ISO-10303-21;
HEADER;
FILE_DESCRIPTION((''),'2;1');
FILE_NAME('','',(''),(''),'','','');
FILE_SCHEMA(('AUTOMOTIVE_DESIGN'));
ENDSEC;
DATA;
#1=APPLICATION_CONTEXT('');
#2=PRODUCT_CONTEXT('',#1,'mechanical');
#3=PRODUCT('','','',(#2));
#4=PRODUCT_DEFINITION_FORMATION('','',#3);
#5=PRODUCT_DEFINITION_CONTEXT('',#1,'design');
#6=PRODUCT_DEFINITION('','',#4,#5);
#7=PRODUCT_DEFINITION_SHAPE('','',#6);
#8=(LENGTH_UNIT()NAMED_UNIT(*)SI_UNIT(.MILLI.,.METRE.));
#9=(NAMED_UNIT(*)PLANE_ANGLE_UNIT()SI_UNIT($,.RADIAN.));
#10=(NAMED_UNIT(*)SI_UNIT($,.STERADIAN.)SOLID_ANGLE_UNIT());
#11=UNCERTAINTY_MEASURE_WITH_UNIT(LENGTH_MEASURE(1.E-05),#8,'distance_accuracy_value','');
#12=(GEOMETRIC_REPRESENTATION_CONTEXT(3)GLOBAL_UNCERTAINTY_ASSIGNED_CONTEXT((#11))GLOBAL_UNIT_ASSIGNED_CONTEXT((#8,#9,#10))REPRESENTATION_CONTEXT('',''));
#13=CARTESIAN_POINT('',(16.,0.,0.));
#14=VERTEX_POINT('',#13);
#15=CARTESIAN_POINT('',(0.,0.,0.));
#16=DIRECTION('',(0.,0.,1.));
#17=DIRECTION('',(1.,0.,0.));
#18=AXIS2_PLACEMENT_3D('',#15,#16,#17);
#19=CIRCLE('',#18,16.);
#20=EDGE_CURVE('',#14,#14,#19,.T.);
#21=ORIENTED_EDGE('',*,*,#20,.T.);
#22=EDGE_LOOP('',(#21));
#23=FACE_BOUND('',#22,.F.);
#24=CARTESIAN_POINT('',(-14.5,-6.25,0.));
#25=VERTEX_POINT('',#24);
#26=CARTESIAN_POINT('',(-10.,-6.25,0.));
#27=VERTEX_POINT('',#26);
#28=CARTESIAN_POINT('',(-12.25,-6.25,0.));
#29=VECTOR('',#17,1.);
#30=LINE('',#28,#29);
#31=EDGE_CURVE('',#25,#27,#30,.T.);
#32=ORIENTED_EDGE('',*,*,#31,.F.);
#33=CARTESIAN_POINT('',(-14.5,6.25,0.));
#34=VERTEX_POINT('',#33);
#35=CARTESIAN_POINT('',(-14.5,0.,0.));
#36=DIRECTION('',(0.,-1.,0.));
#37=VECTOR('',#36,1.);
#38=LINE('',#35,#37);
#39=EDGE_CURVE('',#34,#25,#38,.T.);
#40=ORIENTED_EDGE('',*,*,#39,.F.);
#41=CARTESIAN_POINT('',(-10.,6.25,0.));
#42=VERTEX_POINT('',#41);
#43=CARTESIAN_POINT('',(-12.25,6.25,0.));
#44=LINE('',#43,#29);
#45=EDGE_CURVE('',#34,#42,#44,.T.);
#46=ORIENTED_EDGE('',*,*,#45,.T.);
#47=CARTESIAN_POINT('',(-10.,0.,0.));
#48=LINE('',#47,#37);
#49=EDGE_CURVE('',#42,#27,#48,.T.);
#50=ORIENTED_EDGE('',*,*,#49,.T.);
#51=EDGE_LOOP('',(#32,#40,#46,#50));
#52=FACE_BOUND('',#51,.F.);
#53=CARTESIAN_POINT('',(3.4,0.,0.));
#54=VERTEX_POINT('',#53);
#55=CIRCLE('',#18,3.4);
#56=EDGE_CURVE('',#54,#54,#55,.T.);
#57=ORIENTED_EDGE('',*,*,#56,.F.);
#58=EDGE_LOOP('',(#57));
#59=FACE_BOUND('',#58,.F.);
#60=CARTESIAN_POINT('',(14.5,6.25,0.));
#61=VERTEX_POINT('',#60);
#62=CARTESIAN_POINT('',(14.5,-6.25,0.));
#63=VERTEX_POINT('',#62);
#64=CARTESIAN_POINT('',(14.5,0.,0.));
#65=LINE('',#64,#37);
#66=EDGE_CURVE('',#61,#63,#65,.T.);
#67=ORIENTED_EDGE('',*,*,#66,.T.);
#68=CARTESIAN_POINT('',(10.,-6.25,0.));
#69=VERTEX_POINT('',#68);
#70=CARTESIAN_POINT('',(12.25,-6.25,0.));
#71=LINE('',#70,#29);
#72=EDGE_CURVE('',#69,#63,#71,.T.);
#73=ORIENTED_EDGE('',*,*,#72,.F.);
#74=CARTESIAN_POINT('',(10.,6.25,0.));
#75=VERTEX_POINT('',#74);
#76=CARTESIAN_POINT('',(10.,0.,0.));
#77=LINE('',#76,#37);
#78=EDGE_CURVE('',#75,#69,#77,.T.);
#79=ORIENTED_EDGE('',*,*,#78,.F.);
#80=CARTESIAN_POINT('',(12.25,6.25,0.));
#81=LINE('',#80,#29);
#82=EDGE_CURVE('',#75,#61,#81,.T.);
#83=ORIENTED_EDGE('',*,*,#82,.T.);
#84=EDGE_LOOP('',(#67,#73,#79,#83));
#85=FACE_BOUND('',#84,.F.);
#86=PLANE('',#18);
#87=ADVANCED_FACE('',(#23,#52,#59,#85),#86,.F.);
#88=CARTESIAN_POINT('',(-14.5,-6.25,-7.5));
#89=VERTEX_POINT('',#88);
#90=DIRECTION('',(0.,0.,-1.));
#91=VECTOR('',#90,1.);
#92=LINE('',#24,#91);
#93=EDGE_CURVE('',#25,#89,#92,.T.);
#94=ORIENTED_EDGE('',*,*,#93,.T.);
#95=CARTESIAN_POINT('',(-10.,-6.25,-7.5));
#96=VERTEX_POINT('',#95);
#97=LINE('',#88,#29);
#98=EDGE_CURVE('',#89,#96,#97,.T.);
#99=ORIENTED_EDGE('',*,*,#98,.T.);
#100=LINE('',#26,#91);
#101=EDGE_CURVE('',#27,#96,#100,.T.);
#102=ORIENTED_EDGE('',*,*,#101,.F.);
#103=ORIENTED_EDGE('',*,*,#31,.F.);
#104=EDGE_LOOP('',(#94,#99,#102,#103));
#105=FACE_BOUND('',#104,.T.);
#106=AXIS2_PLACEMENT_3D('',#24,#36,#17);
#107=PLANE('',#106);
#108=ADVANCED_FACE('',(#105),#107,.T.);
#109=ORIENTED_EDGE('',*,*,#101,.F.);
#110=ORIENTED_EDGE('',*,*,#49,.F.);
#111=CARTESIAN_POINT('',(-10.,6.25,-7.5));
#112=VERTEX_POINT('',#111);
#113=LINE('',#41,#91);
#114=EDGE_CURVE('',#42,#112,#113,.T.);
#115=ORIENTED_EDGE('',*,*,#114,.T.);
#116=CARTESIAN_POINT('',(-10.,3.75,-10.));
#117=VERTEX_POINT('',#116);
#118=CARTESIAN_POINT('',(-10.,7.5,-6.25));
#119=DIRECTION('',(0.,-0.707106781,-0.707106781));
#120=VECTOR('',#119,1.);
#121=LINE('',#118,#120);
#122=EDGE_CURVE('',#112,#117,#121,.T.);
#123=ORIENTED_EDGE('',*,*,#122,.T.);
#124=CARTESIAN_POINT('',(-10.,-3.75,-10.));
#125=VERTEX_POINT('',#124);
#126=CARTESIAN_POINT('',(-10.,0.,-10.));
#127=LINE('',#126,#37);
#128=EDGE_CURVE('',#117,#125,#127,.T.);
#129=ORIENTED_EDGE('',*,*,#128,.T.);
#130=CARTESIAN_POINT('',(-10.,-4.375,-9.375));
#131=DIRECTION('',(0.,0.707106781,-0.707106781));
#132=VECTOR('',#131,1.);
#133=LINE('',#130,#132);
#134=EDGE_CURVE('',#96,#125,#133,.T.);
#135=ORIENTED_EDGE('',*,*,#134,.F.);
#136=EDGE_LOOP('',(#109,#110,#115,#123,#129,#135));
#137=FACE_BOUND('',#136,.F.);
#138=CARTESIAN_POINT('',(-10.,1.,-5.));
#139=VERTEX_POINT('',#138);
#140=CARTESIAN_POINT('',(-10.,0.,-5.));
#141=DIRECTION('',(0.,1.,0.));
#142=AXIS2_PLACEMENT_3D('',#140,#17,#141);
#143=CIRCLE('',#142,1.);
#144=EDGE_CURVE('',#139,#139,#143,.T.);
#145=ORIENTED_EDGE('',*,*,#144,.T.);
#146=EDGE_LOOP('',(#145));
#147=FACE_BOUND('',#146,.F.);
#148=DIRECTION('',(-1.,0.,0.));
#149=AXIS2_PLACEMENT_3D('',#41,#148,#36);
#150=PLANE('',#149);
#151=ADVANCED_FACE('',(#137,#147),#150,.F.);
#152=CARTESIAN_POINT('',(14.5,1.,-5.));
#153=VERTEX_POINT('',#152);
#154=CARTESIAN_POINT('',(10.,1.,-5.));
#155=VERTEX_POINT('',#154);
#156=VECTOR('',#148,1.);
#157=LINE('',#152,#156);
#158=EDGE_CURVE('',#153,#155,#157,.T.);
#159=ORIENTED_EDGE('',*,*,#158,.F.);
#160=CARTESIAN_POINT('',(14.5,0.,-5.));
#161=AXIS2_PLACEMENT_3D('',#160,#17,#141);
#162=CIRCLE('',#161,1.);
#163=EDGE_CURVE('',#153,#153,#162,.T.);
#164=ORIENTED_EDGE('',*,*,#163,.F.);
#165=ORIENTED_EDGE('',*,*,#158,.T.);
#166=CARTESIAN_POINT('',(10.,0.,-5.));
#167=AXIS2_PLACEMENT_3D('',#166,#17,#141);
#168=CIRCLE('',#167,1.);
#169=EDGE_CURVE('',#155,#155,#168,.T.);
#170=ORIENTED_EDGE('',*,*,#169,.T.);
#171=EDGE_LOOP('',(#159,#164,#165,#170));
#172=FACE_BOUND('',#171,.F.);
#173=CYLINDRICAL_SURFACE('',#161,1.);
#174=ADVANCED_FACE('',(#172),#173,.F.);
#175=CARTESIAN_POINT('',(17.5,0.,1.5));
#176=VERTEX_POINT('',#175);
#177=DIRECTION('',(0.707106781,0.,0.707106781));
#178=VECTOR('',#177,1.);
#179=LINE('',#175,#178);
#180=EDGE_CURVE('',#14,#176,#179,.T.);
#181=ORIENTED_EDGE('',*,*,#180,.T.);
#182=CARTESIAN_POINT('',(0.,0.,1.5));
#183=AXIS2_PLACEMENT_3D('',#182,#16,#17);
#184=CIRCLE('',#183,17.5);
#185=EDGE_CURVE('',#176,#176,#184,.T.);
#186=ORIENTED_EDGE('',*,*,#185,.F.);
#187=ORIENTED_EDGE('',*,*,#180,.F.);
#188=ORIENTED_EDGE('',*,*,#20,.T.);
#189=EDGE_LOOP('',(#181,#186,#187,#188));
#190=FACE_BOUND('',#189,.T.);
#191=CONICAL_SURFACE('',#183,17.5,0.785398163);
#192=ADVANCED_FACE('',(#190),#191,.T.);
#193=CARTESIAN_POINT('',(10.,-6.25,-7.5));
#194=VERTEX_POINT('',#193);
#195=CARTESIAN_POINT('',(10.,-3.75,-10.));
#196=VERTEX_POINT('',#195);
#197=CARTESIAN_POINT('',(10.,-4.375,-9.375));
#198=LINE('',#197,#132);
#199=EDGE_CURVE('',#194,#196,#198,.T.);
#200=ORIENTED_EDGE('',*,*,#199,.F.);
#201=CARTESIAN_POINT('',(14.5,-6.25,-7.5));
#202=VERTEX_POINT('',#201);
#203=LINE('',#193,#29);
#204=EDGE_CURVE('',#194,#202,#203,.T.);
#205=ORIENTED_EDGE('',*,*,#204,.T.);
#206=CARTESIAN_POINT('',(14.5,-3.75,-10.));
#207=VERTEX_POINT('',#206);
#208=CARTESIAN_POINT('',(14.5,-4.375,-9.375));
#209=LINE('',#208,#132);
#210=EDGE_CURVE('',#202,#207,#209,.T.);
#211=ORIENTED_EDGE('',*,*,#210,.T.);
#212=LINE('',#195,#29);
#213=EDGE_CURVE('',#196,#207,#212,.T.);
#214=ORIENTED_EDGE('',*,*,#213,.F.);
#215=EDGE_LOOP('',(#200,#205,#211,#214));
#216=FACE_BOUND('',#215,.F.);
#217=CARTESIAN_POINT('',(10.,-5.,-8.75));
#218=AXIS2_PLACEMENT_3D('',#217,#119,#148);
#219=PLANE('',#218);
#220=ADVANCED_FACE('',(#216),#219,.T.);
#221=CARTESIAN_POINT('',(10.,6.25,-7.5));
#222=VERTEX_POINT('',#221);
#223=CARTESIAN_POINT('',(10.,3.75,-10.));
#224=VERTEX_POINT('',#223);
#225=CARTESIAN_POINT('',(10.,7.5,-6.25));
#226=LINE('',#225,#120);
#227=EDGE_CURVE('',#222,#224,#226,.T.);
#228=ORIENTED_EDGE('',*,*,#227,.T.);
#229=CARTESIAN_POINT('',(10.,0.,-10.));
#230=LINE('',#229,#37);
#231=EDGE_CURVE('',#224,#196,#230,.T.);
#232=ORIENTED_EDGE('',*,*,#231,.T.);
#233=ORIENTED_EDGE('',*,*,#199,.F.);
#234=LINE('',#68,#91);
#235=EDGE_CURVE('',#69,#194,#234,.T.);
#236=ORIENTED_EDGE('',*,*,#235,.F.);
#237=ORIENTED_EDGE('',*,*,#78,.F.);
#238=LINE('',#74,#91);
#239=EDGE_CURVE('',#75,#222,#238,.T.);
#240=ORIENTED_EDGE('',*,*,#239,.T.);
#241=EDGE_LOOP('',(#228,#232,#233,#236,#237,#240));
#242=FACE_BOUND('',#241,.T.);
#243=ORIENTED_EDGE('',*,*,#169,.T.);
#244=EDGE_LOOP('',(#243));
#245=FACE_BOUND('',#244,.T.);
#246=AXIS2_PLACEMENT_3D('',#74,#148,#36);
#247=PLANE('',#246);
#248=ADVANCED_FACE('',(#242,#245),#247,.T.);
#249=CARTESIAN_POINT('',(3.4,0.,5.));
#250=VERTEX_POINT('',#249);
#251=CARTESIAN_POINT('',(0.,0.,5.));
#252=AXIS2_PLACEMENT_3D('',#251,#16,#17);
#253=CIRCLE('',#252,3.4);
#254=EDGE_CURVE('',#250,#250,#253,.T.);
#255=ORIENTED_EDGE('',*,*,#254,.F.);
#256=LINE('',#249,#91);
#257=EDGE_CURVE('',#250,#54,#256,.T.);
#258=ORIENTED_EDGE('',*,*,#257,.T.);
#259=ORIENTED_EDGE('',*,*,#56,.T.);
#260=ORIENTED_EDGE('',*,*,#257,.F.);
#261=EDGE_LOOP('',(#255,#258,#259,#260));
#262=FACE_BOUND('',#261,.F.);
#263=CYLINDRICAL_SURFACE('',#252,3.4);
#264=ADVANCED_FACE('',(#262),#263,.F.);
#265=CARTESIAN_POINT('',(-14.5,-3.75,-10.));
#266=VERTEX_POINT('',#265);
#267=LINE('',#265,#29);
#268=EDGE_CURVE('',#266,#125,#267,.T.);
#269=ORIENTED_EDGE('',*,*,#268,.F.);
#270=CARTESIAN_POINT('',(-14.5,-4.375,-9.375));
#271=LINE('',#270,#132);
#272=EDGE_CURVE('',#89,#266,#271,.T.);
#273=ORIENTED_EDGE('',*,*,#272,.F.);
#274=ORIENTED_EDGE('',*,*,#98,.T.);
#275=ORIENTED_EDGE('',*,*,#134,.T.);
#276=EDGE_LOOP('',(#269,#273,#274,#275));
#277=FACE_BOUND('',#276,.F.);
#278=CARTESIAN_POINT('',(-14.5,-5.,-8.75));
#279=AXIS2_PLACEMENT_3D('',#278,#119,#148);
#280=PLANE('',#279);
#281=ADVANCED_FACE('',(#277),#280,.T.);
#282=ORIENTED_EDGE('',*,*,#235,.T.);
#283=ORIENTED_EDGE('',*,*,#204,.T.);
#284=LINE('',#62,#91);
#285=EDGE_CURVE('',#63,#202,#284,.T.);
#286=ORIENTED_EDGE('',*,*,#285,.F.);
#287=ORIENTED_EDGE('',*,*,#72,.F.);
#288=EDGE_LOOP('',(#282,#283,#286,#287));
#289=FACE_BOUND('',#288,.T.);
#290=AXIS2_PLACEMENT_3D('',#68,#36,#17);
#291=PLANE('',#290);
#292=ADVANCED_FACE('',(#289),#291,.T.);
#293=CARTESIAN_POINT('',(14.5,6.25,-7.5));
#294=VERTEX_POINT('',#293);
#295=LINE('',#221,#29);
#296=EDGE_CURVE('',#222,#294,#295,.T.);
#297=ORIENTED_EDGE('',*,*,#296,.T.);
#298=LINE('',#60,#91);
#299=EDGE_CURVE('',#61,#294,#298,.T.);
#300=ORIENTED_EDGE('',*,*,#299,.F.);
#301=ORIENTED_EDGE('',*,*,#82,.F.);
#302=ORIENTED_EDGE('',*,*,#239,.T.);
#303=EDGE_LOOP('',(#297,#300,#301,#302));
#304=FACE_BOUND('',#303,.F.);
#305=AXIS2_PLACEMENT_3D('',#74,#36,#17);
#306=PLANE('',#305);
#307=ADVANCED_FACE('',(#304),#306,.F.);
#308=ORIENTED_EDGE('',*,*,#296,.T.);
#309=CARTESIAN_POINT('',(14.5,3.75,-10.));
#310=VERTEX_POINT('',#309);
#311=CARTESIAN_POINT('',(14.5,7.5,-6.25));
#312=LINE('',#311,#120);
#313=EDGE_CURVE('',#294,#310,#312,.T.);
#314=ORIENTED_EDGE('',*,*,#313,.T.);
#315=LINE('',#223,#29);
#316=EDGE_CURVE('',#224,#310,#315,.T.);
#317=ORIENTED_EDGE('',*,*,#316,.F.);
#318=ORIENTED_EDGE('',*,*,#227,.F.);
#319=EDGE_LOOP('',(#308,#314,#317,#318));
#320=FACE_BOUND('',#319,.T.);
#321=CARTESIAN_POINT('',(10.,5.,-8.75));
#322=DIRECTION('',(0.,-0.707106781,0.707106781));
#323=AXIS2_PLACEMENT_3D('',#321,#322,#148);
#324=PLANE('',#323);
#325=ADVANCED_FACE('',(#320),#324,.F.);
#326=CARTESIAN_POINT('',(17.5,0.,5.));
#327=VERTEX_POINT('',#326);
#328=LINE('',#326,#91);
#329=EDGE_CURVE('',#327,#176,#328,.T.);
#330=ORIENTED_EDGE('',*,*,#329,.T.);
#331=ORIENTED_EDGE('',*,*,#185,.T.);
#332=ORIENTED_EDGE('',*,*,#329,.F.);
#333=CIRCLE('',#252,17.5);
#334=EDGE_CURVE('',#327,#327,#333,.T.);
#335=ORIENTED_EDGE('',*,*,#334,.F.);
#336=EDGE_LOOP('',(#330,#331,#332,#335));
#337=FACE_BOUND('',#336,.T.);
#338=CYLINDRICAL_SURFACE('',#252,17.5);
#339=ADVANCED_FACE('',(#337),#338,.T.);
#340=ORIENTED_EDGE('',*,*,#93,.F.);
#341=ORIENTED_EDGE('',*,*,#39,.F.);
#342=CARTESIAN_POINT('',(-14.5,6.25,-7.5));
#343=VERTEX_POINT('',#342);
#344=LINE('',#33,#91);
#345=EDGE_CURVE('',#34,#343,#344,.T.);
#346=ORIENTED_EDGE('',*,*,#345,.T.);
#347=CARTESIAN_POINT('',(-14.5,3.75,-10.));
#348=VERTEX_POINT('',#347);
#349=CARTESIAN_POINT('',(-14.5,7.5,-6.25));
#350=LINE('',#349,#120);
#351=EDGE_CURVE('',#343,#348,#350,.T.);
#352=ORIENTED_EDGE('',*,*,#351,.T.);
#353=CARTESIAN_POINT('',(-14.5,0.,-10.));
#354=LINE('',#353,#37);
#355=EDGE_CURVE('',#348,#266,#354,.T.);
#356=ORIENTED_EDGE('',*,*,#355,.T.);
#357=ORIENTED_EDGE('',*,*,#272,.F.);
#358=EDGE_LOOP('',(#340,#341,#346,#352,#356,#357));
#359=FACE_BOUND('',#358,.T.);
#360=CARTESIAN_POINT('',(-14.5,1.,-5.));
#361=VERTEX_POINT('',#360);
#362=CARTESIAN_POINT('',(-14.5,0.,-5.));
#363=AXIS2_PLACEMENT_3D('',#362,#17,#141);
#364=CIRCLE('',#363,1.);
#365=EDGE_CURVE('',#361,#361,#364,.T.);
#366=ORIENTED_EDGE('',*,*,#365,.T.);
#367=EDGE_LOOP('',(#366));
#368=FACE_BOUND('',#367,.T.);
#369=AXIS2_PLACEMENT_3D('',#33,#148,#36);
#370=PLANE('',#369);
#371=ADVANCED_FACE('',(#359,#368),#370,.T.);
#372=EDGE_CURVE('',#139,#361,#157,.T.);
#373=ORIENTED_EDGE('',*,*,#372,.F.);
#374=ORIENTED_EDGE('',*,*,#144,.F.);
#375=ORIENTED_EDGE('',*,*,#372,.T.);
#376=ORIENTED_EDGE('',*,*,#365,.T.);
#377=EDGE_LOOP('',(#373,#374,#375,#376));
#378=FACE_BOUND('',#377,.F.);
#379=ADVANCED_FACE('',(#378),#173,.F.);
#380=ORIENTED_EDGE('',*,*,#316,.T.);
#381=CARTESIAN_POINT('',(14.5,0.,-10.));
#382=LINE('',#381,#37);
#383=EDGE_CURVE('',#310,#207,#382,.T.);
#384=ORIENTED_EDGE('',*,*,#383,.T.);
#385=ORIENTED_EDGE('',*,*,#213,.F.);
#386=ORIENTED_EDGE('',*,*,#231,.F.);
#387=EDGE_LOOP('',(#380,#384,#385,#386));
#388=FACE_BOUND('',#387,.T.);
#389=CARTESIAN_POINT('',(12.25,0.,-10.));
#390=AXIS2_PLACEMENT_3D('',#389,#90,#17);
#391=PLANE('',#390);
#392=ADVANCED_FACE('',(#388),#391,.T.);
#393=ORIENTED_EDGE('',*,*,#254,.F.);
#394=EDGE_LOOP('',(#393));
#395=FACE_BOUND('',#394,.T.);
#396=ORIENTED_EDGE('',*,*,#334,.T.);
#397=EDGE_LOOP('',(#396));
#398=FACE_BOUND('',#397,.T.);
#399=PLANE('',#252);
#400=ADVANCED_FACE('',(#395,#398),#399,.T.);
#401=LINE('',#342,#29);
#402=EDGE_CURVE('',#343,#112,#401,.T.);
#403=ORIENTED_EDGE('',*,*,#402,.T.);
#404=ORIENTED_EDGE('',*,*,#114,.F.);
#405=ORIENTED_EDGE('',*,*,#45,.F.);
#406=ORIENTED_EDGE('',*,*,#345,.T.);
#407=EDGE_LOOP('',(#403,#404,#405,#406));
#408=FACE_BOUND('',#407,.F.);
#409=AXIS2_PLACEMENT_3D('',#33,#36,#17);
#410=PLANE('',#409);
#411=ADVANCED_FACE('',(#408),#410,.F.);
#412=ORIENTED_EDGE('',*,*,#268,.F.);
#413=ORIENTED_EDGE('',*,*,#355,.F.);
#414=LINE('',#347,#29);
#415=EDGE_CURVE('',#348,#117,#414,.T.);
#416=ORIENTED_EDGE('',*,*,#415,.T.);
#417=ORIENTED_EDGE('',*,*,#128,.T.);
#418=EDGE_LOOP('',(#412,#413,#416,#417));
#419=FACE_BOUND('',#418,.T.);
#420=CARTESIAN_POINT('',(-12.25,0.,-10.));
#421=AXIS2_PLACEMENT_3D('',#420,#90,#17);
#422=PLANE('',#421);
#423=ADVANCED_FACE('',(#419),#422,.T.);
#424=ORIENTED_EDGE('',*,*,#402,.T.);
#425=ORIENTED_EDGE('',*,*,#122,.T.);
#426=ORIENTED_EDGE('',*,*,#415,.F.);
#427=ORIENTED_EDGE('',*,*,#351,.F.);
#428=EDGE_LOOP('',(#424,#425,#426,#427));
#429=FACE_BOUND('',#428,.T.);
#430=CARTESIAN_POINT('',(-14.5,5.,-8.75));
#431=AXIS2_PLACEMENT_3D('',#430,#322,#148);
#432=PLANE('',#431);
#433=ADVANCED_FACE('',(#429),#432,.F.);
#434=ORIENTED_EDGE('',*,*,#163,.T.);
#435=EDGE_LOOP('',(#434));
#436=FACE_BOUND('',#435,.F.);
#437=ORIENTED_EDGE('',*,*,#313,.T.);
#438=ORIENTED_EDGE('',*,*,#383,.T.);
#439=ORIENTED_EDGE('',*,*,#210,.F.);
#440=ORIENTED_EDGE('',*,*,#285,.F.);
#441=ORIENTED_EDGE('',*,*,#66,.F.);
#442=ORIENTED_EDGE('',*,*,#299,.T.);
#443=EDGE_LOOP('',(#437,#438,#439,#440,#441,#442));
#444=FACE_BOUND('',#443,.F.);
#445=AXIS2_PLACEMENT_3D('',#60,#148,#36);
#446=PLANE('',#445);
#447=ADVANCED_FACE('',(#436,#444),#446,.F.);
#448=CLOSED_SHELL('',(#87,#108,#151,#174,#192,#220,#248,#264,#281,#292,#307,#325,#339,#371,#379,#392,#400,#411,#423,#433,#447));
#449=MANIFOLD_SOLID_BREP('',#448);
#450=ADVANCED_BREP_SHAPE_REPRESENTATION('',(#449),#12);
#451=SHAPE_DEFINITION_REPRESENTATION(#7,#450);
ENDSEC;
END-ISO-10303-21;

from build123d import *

# Parameters (mm, degrees)
F1_DEPTH  = 5
F3_SIZE   = 1
F2_W      = 4.5
F2_H      = 12.5
F4_DEPTH  = 10
F5_SIZE   = 2.5
F6_R      = 1
F7_DEPTH  = 39.5010001
F8_R      = 39.5864097355
F8_R_2    = 17.5
F9_DEPTH  = 25
F10_SIZE  = 1.5
F11_R     = 3.4
F12_DEPTH = 25


with BuildPart() as f1:
    # F0 (on Top) → F1 (new body)
    with BuildSketch(Plane.XY):
        with BuildLine():
            ThreePointArc((19.8625961196, -15.8301909188), (23.6080012184, -12.5093598908), (25, -7.7012087429))
            Line((25, -7.7012087429), (25, 7.7012087429))
            ThreePointArc((25, 7.7012087429), (23.6080012184, 12.5093598908), (19.8625961196, 15.8301909188))
            add(Edge.make_bspline(
                [(19.8625961196, 15.8301909188), (0, 25.2681728257), (-19.8625961196, 15.8301909188)],
                knots=[0.9132750433, 0.9132750433, 0.9132750433, 2.2283176103, 2.2283176103, 2.2283176103], degree=2, weights=[1, 0.7915095459, 1]))
            ThreePointArc((-19.8625961196, 15.8301909188), (-23.6080012184, 12.5093598908), (-25, 7.7012087429))
            Line((-25, 7.7012087429), (-25, -7.7012087429))
            ThreePointArc((-25, -7.7012087429), (-23.6080012184, -12.5093598908), (-19.8625961196, -15.8301909188))
            add(Edge.make_bspline(
                [(-19.8625961196, -15.8301909188), (0, -25.2681728257), (19.8625961196, -15.8301909188)],
                knots=[4.0548676969, 4.0548676969, 4.0548676969, 5.3699102639, 5.3699102639, 5.3699102639], degree=2, weights=[1, 0.7915095459, 1]))
        make_face()
    extrude(amount=F1_DEPTH)

    # F3
    f3_edges = [f1.edges().sort_by_distance(p)[0] for p in [
        (4e-06, -20, 0),
    ]]
    chamfer(f3_edges, length=F3_SIZE)

    # F2 (on face) → F4 (join)
    with BuildSketch(Plane(origin=(0, 0, 0), x_dir=(1, 0, 0), z_dir=(0, 0, -1))):
        with Locations((12.25, 0)):
            Rectangle(F2_W, F2_H)
        with Locations((-12.25, 0)):
            Rectangle(F2_W, F2_H)
    extrude(amount=F4_DEPTH)

    # F5
    f5_edges = [f1.edges().sort_by_distance(p)[0] for p in [
        (-12.25, -6.25, -10),
        (12.25, -6.25, -10),
        (-12.25, 6.25, -10),
        (12.25, 6.25, -10),
    ]]
    chamfer(f5_edges, length=F5_SIZE)

    # F6 (on face) → F7 (cut, through all)
    with BuildSketch(Plane.YZ.offset(14.5)):
        with Locations((0, -5)):
            Circle(F6_R)
    extrude(amount=-F7_DEPTH, mode=Mode.SUBTRACT)

    # F8 (on face) → F9 (cut)
    with BuildSketch(Plane.XY.offset(5)):
        Circle(F8_R)
        with BuildLine():
            add(Edge.make_bspline(
                [(-19.8625961196, -15.8301909188), (0, -25.2681728257), (19.8625961196, -15.8301909188)],
                knots=[4.0548676969, 4.0548676969, 4.0548676969, 5.3699102639, 5.3699102639, 5.3699102639], degree=2, weights=[1, 0.7915095459, 1]))
            ThreePointArc((-19.8625961196, -15.8301909188), (-23.6080012184, -12.5093598908), (-25, -7.7012087429))
            Line((-25, -7.7012087429), (-25, 7.7012087429))
            ThreePointArc((-25, 7.7012087429), (-23.6080012184, 12.5093598908), (-19.8625961196, 15.8301909188))
            add(Edge.make_bspline(
                [(19.8625961196, 15.8301909188), (0, 25.2681728257), (-19.8625961196, 15.8301909188)],
                knots=[0.9132750433, 0.9132750433, 0.9132750433, 2.2283176103, 2.2283176103, 2.2283176103], degree=2, weights=[1, 0.7915095459, 1]))
            ThreePointArc((19.8625961196, 15.8301909188), (23.6080012184, 12.5093598908), (25, 7.7012087429))
            Line((25, 7.7012087429), (25, -7.7012087429))
            ThreePointArc((25, -7.7012087429), (23.6080012184, -12.5093598908), (19.8625961196, -15.8301909188))
        make_face(mode=Mode.SUBTRACT)
        with BuildLine():
            ThreePointArc((-25, -7.7012087429), (-23.6080012184, -12.5093598908), (-19.8625961196, -15.8301909188))
            add(Edge.make_bspline(
                [(-19.8625961196, -15.8301909188), (0, -25.2681728257), (19.8625961196, -15.8301909188)],
                knots=[4.0548676969, 4.0548676969, 4.0548676969, 5.3699102639, 5.3699102639, 5.3699102639], degree=2, weights=[1, 0.7915095459, 1]))
            ThreePointArc((19.8625961196, -15.8301909188), (23.6080012184, -12.5093598908), (25, -7.7012087429))
            Line((25, -7.7012087429), (25, 7.7012087429))
            ThreePointArc((25, 7.7012087429), (23.6080012184, 12.5093598908), (19.8625961196, 15.8301909188))
            add(Edge.make_bspline(
                [(19.8625961196, 15.8301909188), (0, 25.2681728257), (-19.8625961196, 15.8301909188)],
                knots=[0.9132750433, 0.9132750433, 0.9132750433, 2.2283176103, 2.2283176103, 2.2283176103], degree=2, weights=[1, 0.7915095459, 1]))
            ThreePointArc((-19.8625961196, 15.8301909188), (-23.6080012184, 12.5093598908), (-25, 7.7012087429))
            Line((-25, 7.7012087429), (-25, -7.7012087429))
        make_face()
        Circle(F8_R_2, mode=Mode.SUBTRACT)
    extrude(amount=-F9_DEPTH, mode=Mode.SUBTRACT)

    # F10
    f10_edges = [f1.edges().sort_by_distance(p)[0] for p in [
        (-17.5, 0, 0),
    ]]
    chamfer(f10_edges, length=F10_SIZE)

    # F11 (on face) → F12 (cut)
    with BuildSketch(Plane.XY.offset(5)):
        Circle(F11_R)
    extrude(amount=-F12_DEPTH, mode=Mode.SUBTRACT)


solid = f1.part
